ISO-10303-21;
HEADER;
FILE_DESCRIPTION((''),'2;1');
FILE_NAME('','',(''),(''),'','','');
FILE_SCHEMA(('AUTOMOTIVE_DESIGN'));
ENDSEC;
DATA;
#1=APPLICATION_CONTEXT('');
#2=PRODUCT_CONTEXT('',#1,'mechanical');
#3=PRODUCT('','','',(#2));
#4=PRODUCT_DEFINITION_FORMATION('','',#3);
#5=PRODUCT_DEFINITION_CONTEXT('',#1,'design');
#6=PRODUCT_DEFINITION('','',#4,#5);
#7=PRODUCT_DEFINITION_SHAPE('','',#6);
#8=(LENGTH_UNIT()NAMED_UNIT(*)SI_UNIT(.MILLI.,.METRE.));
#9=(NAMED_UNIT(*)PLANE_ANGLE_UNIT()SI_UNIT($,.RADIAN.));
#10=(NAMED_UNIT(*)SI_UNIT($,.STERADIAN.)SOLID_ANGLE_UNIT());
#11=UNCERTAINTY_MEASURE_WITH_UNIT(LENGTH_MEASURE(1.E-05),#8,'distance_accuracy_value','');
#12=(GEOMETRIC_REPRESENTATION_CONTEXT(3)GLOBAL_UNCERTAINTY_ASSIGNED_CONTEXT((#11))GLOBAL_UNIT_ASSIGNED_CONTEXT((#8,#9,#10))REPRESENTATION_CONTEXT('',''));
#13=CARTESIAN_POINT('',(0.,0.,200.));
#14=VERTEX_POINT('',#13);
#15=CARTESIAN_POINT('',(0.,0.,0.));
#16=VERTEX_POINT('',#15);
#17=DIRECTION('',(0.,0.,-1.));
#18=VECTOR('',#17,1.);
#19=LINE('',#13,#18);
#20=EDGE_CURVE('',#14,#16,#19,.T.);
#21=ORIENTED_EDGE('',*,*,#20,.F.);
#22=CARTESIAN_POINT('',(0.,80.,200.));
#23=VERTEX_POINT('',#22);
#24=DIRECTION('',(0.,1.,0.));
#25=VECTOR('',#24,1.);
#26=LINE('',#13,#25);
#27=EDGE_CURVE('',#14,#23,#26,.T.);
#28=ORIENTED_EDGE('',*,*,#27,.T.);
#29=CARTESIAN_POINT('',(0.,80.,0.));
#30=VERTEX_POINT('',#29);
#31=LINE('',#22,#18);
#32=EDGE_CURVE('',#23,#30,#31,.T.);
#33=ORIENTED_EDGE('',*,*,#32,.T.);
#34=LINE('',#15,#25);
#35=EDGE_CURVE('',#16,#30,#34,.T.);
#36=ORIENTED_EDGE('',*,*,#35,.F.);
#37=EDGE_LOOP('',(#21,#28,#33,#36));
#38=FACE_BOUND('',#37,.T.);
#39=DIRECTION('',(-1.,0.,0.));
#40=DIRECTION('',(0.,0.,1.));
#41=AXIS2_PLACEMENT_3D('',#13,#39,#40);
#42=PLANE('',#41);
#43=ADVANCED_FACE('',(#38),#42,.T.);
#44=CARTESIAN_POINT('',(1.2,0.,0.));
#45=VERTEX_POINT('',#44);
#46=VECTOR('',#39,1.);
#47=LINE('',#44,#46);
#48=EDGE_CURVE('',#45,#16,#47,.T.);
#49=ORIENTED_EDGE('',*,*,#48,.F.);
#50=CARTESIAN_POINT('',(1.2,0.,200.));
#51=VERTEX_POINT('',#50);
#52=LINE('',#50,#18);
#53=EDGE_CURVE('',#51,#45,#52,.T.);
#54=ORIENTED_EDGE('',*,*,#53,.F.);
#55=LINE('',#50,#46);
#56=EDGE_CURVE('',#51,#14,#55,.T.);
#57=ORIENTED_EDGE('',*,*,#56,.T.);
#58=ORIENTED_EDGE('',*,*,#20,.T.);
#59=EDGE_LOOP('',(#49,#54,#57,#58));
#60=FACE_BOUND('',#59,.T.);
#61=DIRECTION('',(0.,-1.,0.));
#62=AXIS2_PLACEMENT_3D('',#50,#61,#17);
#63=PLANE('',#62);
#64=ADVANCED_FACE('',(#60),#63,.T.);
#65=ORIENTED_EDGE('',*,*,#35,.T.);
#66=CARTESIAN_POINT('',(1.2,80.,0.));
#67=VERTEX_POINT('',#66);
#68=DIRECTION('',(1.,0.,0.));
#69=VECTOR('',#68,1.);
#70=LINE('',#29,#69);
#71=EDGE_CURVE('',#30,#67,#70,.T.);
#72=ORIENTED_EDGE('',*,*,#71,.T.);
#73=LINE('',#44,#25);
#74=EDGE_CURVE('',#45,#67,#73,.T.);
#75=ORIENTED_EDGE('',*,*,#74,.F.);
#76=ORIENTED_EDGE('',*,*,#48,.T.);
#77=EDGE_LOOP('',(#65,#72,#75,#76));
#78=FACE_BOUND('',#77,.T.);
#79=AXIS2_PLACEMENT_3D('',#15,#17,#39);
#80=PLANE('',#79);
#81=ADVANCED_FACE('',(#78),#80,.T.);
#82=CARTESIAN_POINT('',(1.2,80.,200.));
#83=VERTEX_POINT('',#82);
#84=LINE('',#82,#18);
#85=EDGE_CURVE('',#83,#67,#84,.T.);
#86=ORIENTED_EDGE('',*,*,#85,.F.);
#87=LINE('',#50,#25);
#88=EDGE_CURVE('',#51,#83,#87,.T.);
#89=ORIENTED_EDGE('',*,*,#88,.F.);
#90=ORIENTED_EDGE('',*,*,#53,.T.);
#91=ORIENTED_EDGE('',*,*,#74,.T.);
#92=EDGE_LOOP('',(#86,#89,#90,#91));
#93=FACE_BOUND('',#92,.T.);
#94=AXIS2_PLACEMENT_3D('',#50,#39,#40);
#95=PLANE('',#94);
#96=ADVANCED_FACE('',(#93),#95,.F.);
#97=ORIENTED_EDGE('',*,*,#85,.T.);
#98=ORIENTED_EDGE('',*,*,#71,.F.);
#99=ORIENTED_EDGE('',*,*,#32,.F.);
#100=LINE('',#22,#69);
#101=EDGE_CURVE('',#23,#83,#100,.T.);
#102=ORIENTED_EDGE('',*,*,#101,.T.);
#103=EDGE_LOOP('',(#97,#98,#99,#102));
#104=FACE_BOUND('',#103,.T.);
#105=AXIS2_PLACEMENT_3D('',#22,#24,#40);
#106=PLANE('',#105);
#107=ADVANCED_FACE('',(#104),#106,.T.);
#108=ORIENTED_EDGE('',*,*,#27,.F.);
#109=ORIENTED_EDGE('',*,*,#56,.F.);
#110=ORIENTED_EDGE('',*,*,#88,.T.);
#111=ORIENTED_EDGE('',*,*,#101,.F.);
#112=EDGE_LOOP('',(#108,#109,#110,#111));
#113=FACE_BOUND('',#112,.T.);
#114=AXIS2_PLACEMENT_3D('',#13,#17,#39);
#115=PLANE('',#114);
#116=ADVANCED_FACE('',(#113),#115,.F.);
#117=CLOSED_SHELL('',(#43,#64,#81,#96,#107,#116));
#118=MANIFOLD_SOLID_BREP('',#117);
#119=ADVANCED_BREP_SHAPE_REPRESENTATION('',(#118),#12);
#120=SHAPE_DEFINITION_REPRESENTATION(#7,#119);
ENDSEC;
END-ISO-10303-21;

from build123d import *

# Parameters (mm, degrees)
ESBO_O1_W          = 1.2
ESBO_O1_H          = 80
FLANGE_BASE1_DEPTH = 200


# Sheet-metal steps are written as plain solids
with BuildPart() as part:
    # Esboço1 → Flange-base1 (new body)
    with BuildSketch(Plane.XY):
        with Locations((0.6, 40)):
            Rectangle(ESBO_O1_W, ESBO_O1_H)
    extrude(amount=FLANGE_BASE1_DEPTH)


solid = part.part
